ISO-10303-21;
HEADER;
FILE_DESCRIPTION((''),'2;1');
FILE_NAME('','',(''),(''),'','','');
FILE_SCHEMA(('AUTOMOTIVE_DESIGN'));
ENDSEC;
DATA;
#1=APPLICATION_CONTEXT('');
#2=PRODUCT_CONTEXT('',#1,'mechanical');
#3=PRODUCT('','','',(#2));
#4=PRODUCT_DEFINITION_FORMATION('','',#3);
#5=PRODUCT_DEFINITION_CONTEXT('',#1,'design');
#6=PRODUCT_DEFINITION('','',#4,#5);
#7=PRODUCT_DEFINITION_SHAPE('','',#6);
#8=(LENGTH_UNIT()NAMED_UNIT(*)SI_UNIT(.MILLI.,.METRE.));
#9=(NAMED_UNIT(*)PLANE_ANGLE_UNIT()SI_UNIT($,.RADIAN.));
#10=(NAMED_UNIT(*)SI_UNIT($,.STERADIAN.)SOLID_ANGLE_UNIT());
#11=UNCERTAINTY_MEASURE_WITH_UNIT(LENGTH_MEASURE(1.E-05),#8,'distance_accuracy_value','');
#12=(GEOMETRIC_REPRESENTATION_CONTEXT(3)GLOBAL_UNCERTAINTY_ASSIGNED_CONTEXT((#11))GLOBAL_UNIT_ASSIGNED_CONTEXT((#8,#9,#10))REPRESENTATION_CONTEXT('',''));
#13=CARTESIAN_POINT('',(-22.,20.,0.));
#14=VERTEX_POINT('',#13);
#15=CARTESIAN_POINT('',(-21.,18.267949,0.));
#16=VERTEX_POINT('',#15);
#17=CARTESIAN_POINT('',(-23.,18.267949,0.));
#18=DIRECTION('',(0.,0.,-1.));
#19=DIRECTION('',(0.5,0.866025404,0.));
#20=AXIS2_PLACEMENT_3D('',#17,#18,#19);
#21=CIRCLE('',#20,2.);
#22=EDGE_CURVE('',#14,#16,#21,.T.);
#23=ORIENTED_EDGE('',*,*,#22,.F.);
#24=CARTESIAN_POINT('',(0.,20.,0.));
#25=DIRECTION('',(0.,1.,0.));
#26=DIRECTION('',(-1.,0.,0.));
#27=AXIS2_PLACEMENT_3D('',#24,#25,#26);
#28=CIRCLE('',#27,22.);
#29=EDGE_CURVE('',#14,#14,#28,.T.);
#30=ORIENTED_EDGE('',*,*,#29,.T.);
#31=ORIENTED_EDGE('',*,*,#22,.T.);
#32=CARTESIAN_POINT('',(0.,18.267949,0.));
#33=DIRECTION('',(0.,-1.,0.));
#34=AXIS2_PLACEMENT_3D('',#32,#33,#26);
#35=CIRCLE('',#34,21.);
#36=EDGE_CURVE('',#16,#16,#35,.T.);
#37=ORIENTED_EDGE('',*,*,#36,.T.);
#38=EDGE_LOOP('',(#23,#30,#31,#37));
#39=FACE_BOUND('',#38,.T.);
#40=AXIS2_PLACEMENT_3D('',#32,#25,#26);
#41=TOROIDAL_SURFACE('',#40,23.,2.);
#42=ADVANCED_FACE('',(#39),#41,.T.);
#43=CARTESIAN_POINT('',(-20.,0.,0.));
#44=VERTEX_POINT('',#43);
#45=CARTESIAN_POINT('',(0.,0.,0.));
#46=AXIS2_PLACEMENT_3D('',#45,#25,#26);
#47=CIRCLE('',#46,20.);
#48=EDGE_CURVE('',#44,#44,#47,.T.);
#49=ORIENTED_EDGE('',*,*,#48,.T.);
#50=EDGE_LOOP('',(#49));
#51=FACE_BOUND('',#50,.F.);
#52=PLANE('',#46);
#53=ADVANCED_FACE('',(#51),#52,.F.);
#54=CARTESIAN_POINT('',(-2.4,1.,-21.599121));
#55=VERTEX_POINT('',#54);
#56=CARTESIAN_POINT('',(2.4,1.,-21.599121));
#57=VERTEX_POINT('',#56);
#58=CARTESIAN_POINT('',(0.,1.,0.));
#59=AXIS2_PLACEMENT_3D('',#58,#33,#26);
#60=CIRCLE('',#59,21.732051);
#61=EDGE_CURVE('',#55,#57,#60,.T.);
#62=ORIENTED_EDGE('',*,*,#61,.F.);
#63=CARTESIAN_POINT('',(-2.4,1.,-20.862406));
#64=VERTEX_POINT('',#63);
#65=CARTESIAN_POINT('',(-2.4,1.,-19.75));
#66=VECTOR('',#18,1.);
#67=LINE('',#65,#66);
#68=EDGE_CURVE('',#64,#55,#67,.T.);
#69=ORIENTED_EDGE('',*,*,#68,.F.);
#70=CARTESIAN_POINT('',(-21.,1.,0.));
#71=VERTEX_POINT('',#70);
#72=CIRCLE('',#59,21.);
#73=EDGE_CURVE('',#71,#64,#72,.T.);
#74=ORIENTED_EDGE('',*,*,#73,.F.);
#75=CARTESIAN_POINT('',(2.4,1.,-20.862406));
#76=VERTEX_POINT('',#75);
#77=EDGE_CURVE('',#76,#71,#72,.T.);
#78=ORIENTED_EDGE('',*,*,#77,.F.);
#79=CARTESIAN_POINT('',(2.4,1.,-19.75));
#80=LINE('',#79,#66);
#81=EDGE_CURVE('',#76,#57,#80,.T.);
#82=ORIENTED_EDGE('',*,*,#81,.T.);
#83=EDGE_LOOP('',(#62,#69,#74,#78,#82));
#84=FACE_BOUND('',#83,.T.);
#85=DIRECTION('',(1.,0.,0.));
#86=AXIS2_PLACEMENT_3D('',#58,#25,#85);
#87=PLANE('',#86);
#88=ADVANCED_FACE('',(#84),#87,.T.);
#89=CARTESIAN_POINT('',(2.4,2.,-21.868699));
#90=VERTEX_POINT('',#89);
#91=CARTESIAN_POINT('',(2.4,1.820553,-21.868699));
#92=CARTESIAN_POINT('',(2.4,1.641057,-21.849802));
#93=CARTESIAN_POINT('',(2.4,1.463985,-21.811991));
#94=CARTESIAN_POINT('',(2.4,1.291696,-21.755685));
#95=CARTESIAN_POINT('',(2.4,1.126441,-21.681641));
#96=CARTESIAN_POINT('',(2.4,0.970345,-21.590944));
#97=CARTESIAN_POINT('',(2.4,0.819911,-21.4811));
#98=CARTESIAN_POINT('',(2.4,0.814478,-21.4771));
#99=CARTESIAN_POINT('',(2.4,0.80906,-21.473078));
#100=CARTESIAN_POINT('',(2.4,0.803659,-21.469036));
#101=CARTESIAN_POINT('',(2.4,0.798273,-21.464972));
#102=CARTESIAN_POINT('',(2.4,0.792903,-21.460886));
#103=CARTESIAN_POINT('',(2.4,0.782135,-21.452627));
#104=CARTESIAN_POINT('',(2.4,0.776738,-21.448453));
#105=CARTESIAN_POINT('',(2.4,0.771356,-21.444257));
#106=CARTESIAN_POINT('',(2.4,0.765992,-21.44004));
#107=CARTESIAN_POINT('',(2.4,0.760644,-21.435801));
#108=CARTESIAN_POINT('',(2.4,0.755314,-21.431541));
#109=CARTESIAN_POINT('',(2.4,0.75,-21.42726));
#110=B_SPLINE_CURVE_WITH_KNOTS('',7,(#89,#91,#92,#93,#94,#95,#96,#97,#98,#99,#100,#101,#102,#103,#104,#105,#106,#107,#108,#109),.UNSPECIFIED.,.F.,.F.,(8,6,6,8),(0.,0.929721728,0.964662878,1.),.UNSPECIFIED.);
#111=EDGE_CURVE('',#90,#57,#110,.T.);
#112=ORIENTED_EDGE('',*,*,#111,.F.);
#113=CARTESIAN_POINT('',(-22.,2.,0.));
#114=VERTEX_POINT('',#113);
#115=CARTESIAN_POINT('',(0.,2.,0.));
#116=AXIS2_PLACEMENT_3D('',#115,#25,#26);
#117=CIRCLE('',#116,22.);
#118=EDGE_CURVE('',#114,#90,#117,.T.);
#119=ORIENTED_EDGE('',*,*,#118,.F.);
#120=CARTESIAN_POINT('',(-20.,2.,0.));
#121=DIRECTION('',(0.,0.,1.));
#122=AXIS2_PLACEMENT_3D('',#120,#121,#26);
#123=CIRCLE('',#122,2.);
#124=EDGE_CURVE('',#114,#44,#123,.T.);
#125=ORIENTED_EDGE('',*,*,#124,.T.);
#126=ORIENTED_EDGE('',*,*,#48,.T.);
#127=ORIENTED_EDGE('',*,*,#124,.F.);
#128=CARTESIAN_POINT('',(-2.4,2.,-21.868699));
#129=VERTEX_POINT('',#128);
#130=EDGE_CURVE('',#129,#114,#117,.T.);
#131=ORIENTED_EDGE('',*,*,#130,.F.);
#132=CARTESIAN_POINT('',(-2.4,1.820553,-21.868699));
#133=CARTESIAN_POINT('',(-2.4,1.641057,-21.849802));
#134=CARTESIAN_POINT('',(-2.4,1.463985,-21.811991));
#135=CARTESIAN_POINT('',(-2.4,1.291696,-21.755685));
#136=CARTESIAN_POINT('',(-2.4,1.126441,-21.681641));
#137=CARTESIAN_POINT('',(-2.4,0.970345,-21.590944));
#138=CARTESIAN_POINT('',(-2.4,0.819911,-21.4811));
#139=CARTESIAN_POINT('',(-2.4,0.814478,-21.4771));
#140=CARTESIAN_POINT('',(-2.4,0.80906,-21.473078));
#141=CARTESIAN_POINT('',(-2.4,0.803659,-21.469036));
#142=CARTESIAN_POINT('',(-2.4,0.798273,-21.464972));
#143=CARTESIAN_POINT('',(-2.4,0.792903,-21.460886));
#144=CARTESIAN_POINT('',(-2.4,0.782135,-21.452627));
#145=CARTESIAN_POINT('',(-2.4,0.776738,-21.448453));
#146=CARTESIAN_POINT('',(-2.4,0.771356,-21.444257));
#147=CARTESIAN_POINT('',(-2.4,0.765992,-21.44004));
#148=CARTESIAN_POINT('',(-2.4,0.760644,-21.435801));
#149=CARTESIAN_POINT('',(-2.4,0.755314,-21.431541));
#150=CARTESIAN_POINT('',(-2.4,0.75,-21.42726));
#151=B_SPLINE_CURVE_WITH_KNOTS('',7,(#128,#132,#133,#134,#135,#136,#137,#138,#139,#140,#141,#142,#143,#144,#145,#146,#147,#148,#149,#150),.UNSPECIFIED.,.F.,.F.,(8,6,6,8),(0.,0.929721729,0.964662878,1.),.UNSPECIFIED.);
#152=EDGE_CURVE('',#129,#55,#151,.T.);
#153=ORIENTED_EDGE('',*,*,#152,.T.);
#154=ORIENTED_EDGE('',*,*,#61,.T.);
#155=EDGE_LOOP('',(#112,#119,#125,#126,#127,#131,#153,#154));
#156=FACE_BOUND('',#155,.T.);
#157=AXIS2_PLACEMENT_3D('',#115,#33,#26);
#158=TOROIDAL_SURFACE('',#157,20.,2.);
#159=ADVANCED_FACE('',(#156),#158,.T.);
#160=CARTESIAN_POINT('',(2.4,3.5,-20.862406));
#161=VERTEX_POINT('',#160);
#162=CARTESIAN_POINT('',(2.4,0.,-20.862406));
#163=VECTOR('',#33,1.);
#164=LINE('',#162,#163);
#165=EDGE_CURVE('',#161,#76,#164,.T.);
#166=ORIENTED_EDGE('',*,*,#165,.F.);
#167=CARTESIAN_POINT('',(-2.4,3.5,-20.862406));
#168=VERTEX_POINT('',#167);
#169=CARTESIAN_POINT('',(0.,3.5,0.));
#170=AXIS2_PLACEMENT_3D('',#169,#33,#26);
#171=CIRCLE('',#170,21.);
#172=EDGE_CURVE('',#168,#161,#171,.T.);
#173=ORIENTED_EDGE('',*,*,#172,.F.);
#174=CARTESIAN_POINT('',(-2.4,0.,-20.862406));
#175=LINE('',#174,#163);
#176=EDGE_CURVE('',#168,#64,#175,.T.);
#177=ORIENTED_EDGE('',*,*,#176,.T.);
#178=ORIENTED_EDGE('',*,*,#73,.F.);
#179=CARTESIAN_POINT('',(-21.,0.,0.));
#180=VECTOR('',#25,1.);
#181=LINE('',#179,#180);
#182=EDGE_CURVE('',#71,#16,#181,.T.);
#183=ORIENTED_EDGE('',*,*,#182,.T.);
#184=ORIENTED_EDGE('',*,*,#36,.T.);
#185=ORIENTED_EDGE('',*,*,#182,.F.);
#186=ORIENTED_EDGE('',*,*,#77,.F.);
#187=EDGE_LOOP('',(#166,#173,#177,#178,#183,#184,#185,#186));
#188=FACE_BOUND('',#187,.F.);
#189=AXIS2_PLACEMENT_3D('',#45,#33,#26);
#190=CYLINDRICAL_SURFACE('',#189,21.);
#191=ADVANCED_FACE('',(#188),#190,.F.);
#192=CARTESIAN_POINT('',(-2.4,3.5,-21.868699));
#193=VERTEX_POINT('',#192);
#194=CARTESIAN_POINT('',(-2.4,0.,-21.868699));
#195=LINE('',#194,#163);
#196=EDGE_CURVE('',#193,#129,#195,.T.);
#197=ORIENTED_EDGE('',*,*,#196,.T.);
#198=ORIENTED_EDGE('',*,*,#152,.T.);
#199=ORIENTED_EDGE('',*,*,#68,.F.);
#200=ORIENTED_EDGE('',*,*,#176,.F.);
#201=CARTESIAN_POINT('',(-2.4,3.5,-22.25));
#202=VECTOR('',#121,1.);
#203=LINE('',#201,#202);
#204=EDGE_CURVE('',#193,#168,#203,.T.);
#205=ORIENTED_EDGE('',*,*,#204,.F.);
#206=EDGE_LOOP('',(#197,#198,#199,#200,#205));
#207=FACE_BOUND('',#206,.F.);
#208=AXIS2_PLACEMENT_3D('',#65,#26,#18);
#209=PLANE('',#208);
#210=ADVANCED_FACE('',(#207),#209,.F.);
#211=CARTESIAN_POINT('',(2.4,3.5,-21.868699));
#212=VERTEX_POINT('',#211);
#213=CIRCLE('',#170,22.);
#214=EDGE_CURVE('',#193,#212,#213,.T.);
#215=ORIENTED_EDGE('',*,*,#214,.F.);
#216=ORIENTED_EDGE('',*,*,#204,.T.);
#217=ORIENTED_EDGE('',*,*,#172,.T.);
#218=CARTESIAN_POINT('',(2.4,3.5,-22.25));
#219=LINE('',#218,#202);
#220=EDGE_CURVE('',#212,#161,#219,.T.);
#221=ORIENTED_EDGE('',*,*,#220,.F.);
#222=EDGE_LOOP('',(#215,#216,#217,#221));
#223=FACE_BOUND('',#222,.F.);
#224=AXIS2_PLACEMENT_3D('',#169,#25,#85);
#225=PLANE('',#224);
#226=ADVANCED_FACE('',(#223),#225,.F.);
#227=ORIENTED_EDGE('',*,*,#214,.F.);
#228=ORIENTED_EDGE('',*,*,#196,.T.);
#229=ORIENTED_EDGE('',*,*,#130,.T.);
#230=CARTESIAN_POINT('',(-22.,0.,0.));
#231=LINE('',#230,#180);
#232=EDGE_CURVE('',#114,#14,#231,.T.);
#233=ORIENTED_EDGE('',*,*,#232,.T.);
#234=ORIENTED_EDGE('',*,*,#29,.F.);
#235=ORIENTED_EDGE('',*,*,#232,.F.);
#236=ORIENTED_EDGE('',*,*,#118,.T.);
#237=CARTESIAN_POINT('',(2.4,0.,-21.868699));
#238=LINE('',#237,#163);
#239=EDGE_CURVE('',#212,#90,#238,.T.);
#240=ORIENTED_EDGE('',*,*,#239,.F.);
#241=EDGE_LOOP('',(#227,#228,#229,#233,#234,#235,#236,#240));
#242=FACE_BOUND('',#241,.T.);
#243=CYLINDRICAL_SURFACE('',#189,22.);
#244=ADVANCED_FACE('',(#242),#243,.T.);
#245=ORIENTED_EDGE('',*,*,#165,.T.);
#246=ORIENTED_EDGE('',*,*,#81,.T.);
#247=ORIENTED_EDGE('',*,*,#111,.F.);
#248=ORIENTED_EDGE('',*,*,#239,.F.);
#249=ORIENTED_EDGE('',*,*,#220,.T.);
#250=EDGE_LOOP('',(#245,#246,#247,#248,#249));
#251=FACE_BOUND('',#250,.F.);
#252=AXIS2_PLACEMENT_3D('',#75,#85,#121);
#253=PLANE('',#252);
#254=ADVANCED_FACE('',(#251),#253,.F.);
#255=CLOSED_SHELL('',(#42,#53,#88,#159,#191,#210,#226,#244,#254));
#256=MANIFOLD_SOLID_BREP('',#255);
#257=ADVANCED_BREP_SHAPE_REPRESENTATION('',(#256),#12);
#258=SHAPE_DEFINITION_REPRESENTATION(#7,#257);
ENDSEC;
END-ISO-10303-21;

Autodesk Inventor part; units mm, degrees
ref_plane "YZ Plane" through (0, 0, 0) normal (1, 0, 0) x (0, 1, 0)
ref_plane "XZ Plane" through (0, 0, 0) normal (0, 1, 0) x (-1, 0, 0)
ref_plane "XY Plane" through (0, 0, 0) normal (0, 0, 1) x (1, 0, 0)
sketch "Boceto1" plane through (0, 0, 0) normal (0, 1, 0) x (-1, 0, 0)
  circle A0 centre (0, 0) radius 22
  dimension "d0" = 44
extrude "Extrusión1" add sketch "Boceto1" along normal blind 20
shell "Vaciado1" thickness 1 removed faces 1 at (6.4933, 20, -3.408)
sketch "Boceto3" plane through (0, 1, 0) normal (0, 1, 0) x (1, 0, 0)
  circle A0 centre (0, 0) radius 21 projected
  line L0 (2.4, 19.75) -> (-2.4, 19.75)
  line L1 (-2.4, 19.75) -> (-2.4, 22.25)
  line L2 (-2.4, 22.25) -> (2.4, 22.25)
  line L3 (2.4, 22.25) -> (2.4, 19.75)
  line L4 (2.4, 19.75) -> (-2.4, 22.25) construction
  line L5 (-2.4, 19.75) -> (2.4, 22.25) construction
  point P0 (0, 21)
  dimension "d4" = 4.8
  dimension "d5" = 2.5
extrude "Extrusión2" cut sketch "Boceto3" along normal blind 2.5 contours L3 L0 L1 A0 | A0 L1 L2 L3 picked at (-0.2672, 20.1616)
fillet "Empalme1" radius 2 2 edges at (22, 0, 0) (21, 20, 0)
properties part number "Tapa motor775"
